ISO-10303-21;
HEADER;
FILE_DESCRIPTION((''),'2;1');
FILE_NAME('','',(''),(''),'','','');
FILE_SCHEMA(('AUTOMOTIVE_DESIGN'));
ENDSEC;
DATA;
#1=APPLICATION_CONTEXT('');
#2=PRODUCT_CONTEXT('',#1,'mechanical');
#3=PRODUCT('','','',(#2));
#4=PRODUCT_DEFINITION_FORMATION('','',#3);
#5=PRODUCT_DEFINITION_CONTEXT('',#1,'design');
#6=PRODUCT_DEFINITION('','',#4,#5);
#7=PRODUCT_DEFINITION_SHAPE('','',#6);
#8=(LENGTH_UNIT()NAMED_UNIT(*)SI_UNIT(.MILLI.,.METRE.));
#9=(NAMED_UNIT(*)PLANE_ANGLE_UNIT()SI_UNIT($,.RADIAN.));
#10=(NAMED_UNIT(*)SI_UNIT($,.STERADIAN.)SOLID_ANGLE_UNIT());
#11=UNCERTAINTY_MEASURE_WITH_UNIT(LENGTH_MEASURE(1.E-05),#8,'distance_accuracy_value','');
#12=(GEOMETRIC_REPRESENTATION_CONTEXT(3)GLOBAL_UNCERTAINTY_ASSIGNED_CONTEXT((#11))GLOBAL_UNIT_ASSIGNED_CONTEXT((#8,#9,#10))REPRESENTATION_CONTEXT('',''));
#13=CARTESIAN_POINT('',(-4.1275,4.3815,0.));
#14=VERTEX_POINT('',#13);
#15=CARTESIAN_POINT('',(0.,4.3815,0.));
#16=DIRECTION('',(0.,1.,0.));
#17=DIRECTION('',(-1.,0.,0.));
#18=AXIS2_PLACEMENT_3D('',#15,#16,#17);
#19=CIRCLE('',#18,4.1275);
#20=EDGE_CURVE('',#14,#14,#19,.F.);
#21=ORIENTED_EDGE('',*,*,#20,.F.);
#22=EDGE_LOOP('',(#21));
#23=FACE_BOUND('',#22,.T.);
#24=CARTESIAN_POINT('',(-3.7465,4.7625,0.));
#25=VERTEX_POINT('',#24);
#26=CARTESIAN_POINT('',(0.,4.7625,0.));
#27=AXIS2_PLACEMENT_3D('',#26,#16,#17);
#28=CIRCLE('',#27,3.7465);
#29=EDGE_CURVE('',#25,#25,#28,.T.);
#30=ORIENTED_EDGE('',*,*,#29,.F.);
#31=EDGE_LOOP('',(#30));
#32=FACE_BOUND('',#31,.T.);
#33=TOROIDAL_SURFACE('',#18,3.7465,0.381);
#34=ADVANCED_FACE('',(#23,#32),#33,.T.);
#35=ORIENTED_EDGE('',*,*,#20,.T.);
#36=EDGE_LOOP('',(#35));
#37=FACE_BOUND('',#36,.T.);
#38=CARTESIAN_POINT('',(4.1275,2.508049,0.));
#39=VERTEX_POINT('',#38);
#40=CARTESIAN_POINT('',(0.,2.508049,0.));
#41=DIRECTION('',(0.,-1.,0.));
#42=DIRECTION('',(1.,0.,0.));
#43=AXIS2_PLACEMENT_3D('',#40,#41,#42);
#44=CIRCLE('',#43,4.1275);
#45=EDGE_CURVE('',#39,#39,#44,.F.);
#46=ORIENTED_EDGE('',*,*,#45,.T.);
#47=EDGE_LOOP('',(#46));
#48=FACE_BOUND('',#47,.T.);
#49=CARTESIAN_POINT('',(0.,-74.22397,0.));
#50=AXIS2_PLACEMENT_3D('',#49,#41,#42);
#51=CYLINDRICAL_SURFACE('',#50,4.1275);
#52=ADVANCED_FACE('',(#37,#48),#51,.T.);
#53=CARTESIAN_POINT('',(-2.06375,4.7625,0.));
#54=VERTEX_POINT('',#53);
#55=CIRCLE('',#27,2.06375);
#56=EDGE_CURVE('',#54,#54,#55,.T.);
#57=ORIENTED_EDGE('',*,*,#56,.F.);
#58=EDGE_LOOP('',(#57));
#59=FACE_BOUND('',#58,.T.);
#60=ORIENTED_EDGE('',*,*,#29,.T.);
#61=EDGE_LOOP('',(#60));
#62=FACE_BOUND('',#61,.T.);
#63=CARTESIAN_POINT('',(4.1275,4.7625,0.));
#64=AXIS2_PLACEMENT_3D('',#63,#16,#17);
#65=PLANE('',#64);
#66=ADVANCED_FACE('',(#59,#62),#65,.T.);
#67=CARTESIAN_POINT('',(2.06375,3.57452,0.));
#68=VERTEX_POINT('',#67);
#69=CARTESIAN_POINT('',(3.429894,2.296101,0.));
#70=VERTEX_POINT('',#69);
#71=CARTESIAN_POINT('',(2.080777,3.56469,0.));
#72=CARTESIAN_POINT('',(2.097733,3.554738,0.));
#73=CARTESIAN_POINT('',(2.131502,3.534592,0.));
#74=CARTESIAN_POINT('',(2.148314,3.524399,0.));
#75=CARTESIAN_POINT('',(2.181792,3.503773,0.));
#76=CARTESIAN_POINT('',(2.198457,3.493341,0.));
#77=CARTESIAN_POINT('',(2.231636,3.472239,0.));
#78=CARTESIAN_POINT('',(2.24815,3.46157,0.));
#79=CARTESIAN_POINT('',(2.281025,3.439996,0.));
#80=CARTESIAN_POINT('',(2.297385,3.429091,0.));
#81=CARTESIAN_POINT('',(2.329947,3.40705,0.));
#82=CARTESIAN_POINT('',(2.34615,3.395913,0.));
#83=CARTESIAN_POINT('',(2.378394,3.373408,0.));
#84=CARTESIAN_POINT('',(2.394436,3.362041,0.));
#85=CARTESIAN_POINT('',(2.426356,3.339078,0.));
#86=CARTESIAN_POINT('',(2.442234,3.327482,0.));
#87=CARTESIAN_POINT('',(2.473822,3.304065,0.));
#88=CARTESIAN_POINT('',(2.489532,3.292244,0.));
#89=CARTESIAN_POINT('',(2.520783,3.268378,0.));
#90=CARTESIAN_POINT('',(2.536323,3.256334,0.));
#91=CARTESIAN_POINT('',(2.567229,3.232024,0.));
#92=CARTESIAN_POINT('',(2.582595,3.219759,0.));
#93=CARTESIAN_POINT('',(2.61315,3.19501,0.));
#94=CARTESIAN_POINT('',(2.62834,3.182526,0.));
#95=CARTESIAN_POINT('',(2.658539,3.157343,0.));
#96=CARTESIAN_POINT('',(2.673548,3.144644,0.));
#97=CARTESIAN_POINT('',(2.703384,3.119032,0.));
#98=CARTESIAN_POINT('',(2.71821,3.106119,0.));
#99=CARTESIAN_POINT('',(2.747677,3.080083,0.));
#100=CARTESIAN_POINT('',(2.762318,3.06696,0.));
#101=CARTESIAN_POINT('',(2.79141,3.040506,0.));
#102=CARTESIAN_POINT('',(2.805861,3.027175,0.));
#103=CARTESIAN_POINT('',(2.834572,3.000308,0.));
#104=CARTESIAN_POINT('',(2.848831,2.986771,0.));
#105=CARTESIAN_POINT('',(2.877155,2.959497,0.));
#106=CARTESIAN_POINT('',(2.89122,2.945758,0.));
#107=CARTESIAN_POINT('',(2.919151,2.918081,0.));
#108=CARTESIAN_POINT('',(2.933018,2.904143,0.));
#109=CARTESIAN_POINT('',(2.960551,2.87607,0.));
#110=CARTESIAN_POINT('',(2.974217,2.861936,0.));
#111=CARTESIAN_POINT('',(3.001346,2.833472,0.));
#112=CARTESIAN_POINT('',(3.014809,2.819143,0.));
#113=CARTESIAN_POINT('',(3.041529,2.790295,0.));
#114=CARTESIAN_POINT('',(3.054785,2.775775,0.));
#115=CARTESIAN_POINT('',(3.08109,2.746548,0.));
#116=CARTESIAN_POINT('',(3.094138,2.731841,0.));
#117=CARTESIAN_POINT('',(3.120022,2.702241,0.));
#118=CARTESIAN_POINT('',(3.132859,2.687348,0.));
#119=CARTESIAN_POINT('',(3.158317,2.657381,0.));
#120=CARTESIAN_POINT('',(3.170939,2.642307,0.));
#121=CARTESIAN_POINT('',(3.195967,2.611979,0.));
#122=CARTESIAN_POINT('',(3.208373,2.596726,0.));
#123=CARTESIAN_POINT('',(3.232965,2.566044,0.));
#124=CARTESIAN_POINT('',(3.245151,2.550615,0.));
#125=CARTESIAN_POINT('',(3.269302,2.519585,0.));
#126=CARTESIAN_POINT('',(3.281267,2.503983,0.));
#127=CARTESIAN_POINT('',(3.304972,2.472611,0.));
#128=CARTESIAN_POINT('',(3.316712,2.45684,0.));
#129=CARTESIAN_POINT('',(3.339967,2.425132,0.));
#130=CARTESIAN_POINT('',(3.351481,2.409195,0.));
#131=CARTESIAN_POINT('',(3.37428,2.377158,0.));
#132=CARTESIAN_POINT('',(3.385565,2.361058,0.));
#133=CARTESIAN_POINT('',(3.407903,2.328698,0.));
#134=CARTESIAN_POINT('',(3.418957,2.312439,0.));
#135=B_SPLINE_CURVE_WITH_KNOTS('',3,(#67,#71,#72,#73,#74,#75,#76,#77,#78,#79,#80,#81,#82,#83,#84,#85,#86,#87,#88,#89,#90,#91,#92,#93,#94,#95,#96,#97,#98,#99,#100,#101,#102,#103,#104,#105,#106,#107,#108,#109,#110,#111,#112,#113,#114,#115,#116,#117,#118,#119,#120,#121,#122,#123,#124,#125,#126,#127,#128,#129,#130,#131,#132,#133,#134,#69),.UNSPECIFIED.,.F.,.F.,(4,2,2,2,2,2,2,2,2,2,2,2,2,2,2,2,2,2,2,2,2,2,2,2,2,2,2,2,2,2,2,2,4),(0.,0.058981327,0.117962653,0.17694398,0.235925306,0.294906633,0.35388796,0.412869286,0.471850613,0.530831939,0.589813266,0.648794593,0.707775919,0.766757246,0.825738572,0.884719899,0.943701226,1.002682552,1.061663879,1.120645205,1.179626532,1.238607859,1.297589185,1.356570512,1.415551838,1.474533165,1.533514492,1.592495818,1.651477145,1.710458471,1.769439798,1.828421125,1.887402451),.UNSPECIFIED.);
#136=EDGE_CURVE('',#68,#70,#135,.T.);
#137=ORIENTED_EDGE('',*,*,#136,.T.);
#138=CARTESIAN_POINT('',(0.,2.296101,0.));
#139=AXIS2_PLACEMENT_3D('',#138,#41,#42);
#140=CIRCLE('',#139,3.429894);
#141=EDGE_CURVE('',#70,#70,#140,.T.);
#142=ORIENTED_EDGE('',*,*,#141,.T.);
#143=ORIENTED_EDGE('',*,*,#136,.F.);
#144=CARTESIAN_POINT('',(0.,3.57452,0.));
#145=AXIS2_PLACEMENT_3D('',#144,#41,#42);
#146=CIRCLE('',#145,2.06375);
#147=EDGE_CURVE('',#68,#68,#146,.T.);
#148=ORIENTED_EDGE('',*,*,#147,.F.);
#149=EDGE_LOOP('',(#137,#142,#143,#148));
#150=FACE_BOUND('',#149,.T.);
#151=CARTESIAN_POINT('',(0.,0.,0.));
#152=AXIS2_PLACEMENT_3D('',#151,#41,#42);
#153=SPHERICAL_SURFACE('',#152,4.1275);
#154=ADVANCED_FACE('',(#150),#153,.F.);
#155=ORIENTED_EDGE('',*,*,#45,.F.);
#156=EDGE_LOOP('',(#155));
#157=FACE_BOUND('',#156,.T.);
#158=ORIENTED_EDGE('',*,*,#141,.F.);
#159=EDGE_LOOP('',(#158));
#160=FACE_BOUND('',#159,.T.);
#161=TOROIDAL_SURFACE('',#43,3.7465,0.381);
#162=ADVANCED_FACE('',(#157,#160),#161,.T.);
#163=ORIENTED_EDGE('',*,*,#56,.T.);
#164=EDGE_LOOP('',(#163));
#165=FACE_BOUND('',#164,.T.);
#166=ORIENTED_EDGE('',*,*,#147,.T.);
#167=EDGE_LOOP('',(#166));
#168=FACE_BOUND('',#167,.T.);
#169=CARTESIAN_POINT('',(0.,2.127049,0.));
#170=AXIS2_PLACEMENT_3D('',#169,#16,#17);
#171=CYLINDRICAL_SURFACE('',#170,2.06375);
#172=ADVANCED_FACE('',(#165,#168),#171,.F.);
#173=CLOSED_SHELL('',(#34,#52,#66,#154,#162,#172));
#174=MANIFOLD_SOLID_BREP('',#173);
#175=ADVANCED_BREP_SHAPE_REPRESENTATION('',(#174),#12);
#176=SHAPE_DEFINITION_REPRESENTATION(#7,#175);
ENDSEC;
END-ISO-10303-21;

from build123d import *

# Parameters (mm, degrees)
SKETCH2_R          = 2.06375
CUT_EXTRUDE1_DEPTH = 7.404538696


with BuildPart() as part:
    # Sketch1 → Revolve1 (revolve)
    with BuildSketch(Plane.XY):
        with BuildLine():
            Line((4.1275, 0), (4.1275, 4.7625))
            Line((4.1275, 4.7625), (0, 4.7625))
            Line((0, 4.7625), (0, 4.1275))
            ThreePointArc((0, 4.1275), (2.918583239, 2.918583239), (4.1275, 0))
        make_face()
    revolve(axis=Axis((0, -74.223969944, 0), (0, 1, 0)))

    # Fillet1: read off the stored shape, not the designer's step
    # Fillet1 outline → Fillet1 (revolve, cut)
    with BuildSketch(Plane.XY):
        with BuildLine():
            Line((3.429894366, 2.127048943), (3.7465, 2.127049042))
            ThreePointArc((3.7465, 2.127049042), (3.567044036, 2.17195894), (3.429894366, 2.296101236))
            Line((3.429894366, 2.296101236), (3.429894366, 2.127048943))
        make_face()
        with BuildLine():
            Line((3.7465, 2.127049042), (4.1275, 2.127048943))
            Line((4.1275, 2.127048943), (4.1275, 2.508049043))
            ThreePointArc((4.1275, 2.508049043), (4.015907684, 2.238641359), (3.7465, 2.127049042))
        make_face()
        with BuildLine():
            ThreePointArc((3.7465, 4.7625), (4.015907684, 4.650907684), (4.1275, 4.3815))
            Line((4.1275, 4.3815), (4.1275, 4.7625))
            Line((4.1275, 4.7625), (3.7465, 4.7625))
        make_face()
    revolve(axis=Axis((0, 0, 0), (0, 1, 0)), mode=Mode.SUBTRACT)

    # Fillet1 2 outline → Fillet1 2 (revolve, cut)
    with BuildSketch(Plane.XY):
        with BuildLine():
            ThreePointArc((3.53721911, 2.127048947), (3.977192988, 1.103717438), (4.1275, -4e-09))
            Line((4.1275, -4e-09), (4.1275, 2.127048943))
            Line((4.1275, 2.127048943), (3.7465, 2.127049042))
            Line((3.7465, 2.127049042), (3.53721911, 2.127048947))
        make_face()
    revolve(axis=Axis((0, 0, 0), (0, 1, 0)), mode=Mode.SUBTRACT)

    # Sketch2 → Cut-Extrude1 (cut, through all)
    with BuildSketch(Plane(origin=(0, 4.7625, 0), x_dir=(1, 0, 0), z_dir=(0, 1, 0))):
        with Locations(Location((0, 0, 0), (0, 0, 180))):
            Circle(SKETCH2_R)
    extrude(amount=-CUT_EXTRUDE1_DEPTH, mode=Mode.SUBTRACT)


solid = part.part
